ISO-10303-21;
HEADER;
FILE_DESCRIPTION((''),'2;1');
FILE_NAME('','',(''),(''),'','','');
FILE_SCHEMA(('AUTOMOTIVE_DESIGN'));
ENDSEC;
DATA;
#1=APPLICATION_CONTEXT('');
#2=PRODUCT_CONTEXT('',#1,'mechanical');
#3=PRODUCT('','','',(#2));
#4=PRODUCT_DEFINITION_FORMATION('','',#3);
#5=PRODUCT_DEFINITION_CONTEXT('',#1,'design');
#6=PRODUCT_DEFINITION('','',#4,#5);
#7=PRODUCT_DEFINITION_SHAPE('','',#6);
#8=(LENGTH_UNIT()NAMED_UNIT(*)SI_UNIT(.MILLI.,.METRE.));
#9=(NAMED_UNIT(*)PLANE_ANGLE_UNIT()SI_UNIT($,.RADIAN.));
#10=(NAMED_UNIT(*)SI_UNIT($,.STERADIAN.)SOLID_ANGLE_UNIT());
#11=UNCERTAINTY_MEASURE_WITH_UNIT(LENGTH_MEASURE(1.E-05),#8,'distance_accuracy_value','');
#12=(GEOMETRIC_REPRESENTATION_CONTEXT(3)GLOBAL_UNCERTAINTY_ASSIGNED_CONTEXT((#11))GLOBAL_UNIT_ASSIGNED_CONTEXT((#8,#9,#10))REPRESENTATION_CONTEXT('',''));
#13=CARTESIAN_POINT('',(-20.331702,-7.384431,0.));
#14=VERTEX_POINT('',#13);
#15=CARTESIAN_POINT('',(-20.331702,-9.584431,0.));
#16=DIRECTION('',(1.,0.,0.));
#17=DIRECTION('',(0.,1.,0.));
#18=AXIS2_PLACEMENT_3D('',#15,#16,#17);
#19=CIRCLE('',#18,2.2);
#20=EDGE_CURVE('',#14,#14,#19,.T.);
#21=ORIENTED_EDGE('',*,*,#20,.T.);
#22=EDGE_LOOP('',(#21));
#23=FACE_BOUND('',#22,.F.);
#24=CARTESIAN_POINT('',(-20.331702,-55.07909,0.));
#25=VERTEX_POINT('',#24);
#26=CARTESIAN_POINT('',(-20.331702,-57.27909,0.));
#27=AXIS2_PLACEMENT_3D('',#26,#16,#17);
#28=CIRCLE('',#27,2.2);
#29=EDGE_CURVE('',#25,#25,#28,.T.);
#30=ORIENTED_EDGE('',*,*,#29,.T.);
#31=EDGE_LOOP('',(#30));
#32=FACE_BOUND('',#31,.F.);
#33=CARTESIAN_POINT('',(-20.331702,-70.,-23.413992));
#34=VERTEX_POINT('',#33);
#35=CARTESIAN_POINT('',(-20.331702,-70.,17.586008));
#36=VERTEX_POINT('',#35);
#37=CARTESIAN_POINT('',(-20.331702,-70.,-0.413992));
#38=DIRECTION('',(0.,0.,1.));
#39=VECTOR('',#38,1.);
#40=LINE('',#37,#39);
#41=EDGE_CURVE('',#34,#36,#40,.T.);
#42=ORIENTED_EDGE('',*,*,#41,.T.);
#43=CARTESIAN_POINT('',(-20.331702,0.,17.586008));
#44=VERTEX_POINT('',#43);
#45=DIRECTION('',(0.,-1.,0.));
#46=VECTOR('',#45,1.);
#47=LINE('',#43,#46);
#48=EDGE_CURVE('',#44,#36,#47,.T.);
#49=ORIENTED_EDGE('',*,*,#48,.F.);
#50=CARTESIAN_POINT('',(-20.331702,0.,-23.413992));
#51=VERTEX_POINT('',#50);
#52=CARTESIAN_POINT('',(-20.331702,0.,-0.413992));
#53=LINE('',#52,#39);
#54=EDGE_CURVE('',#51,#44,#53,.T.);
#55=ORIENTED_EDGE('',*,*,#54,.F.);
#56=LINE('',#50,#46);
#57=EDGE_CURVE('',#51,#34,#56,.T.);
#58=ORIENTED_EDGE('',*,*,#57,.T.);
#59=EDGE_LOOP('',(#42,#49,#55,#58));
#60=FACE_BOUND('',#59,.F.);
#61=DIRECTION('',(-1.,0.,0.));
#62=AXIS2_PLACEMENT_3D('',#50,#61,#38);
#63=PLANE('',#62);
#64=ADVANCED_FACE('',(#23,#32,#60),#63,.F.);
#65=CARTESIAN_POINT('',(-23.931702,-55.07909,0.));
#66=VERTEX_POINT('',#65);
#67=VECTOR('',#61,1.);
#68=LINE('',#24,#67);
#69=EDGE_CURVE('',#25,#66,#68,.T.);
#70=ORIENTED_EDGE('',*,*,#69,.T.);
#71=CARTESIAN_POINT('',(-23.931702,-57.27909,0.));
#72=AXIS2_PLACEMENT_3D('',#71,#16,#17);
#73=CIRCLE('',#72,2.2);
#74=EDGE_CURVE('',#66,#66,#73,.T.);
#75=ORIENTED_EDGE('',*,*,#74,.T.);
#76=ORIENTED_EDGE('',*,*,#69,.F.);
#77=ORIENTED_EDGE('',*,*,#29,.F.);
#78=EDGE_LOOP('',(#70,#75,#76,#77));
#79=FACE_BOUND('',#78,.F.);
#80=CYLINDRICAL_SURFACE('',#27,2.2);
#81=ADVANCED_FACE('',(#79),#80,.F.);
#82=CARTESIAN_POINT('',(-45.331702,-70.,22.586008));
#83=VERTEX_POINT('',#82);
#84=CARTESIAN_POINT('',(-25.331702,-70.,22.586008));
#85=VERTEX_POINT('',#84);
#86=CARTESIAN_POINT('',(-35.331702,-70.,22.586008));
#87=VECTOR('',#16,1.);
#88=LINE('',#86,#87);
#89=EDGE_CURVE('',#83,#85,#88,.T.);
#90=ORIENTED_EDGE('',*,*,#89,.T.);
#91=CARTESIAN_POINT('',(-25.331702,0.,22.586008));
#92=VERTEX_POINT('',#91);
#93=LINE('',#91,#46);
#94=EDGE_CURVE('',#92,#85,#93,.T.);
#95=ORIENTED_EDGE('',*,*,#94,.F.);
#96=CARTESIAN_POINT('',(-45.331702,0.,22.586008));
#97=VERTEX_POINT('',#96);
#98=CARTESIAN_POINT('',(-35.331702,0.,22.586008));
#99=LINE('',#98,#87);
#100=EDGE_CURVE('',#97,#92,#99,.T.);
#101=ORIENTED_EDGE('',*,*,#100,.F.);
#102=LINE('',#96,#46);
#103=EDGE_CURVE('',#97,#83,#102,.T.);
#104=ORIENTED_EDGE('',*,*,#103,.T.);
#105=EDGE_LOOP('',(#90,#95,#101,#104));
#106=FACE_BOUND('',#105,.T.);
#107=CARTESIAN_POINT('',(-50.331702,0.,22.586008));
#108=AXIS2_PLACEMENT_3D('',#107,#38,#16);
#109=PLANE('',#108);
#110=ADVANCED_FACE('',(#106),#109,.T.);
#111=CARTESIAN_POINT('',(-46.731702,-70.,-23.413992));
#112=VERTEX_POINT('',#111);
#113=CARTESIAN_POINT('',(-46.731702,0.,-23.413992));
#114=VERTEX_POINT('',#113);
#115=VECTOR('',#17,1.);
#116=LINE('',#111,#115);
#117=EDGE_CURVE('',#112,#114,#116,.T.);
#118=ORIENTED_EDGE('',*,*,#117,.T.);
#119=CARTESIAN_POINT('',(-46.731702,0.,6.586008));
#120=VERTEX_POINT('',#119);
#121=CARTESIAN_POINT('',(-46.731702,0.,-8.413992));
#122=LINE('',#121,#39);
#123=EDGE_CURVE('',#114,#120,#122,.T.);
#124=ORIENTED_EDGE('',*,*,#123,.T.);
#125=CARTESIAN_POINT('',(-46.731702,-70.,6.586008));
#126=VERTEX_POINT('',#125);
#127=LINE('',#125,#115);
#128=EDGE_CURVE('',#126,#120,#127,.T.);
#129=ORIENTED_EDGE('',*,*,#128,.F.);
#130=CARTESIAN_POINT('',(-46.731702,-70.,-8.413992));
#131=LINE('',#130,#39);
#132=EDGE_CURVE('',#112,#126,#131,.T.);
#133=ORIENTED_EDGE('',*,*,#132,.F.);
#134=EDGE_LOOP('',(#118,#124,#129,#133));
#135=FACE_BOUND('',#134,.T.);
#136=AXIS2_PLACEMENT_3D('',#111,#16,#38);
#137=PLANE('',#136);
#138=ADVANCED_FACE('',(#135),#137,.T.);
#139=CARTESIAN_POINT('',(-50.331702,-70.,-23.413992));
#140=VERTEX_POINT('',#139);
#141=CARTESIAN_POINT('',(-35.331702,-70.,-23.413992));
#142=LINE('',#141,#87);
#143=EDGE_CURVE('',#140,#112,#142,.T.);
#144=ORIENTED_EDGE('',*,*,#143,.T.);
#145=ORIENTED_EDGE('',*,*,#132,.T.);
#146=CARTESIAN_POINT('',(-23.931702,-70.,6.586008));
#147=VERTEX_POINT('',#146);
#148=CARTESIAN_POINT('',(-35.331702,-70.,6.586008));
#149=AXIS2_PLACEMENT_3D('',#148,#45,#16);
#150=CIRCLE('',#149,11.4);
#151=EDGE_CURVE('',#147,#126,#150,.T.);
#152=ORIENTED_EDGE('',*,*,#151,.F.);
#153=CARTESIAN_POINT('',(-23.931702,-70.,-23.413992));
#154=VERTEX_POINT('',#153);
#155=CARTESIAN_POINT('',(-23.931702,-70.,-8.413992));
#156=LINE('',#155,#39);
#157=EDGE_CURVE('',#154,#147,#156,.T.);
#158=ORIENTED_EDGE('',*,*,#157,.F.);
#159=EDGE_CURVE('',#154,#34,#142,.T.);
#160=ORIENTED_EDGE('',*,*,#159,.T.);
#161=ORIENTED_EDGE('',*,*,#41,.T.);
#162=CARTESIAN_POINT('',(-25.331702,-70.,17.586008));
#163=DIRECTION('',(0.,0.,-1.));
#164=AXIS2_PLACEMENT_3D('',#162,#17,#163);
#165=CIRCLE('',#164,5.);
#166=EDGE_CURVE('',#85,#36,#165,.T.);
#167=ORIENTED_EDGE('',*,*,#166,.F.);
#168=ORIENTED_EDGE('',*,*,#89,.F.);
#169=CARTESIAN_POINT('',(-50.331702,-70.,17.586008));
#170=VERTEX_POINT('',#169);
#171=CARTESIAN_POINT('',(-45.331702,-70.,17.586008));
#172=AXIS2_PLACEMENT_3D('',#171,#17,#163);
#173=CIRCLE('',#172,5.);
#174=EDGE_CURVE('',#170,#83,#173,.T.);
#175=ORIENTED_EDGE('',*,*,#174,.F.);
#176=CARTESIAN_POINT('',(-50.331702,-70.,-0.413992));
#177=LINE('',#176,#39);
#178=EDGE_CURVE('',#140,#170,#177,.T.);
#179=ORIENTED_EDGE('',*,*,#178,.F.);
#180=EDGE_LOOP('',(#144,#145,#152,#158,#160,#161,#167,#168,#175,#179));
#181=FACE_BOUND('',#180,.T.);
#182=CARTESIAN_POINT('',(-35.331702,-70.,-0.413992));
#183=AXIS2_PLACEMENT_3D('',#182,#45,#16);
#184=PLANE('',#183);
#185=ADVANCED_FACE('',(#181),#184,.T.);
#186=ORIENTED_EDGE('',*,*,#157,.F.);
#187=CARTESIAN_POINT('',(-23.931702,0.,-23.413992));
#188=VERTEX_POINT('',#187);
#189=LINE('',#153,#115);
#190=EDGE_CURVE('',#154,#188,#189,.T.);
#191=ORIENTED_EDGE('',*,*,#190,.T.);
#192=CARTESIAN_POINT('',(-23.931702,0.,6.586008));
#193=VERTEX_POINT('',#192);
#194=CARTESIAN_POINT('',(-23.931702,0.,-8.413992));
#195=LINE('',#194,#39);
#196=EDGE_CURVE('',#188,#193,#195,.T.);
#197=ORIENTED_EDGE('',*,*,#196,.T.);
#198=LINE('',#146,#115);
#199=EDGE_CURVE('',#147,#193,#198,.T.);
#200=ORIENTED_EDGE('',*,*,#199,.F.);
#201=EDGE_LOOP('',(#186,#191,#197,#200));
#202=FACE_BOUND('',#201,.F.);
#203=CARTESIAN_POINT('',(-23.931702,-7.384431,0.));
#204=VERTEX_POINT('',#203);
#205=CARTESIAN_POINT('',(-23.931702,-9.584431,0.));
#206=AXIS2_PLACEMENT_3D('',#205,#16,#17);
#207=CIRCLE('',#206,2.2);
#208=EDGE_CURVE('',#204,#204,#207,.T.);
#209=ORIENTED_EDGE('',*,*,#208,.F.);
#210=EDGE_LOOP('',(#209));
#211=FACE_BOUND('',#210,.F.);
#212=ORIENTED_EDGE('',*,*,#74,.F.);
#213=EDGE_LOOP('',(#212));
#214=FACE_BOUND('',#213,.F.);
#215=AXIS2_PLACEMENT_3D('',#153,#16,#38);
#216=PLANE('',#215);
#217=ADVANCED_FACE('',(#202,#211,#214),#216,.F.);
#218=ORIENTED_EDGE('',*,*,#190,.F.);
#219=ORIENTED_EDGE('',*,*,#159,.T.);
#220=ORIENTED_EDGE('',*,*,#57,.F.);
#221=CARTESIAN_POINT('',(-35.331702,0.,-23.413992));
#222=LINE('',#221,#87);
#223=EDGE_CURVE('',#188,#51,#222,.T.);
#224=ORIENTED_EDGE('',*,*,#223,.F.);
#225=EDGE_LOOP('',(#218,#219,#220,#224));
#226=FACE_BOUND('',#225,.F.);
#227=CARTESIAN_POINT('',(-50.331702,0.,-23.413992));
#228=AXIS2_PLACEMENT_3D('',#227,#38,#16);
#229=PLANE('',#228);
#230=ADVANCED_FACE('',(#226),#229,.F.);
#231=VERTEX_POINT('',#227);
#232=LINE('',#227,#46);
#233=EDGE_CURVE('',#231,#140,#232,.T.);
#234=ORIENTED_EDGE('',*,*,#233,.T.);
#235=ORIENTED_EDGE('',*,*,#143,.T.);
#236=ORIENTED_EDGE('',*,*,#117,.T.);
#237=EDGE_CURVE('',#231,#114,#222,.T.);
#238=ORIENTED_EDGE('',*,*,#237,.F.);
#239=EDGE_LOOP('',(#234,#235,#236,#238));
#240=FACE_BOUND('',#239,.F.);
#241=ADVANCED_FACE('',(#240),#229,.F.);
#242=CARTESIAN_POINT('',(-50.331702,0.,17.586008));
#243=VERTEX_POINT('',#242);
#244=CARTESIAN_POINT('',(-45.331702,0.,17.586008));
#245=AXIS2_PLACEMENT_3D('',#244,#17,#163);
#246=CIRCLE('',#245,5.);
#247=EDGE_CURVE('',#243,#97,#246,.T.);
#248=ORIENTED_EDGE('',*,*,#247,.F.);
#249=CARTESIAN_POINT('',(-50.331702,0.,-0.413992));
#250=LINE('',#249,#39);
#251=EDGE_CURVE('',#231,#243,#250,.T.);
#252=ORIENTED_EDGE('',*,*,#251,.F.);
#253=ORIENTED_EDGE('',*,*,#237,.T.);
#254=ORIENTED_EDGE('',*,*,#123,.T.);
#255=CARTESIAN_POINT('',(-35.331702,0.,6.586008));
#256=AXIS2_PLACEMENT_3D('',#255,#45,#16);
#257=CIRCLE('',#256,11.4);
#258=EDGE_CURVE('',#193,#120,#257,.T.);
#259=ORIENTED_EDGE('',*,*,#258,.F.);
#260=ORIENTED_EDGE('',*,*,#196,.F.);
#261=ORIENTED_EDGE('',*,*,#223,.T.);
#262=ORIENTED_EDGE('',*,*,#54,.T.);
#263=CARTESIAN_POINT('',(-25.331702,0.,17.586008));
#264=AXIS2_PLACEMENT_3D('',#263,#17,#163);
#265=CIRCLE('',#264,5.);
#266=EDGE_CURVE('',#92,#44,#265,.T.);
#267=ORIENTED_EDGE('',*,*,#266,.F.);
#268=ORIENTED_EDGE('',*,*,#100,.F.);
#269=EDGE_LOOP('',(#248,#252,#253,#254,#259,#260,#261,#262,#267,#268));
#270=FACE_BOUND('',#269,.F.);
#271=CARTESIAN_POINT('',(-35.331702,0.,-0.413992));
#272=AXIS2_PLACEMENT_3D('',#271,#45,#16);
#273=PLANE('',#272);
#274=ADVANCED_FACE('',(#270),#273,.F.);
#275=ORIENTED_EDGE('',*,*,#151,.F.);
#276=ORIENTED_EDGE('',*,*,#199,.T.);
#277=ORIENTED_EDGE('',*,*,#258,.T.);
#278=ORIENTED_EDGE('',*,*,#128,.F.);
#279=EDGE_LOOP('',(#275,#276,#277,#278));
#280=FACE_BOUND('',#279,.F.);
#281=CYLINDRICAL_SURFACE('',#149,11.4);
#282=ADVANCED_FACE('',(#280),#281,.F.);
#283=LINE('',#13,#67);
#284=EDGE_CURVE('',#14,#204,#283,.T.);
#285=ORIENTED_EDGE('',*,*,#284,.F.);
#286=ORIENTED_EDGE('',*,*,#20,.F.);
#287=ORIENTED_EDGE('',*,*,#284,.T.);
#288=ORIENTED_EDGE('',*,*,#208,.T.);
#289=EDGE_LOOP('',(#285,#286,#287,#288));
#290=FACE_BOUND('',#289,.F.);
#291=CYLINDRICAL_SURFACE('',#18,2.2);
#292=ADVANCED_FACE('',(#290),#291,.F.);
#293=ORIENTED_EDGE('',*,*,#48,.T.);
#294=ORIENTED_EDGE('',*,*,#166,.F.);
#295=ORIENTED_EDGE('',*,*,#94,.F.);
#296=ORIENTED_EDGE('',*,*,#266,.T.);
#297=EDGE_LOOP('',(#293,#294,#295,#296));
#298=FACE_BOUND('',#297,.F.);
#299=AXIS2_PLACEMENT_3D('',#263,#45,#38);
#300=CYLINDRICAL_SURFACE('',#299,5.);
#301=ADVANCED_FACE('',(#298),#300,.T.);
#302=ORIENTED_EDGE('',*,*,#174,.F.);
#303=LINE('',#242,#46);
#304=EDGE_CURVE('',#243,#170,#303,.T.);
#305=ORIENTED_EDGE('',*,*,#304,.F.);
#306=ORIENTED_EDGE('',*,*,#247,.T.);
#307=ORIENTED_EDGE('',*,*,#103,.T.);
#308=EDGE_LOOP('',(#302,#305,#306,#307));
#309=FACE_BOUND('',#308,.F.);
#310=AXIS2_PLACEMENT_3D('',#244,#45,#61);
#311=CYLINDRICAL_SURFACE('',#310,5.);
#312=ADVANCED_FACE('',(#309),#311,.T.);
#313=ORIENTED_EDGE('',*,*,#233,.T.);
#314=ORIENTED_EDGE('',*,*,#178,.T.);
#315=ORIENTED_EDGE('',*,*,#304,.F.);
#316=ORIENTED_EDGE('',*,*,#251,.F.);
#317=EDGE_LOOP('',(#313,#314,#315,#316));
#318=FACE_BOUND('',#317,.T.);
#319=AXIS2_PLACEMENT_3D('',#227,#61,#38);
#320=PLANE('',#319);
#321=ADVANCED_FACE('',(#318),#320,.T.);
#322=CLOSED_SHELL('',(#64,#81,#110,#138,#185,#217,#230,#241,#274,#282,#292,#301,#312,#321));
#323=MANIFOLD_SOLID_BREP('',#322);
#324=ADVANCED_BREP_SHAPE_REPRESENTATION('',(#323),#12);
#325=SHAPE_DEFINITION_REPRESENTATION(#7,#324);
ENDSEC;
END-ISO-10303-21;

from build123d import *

# Parameters (mm, degrees)
F0_W     = 30
F0_H     = 46
F1_DEPTH = 70
F2_W     = 22.8
F2_H     = 30
F3_DEPTH = 70
F4_R     = 2.2
F5_DEPTH = 3.6
F6_R     = 5


# Not quite as in the source:
# - a feature names something its author has since deleted; it is built from what else it names


with BuildPart() as f1:
    # F0 (on Front) → F1 (new body)
    with BuildSketch(Plane.XZ):
        with Locations((-35.3317022547, -0.4139923602)):
            Rectangle(F0_W, F0_H)
    extrude(amount=F1_DEPTH)

    # F2 (on face) → F3 (cut, through all)
    with BuildSketch(Plane.XZ.offset(70)):
        with Locations((-35.3317022547, -8.4139923602)):
            Rectangle(F2_W, F2_H)
        with BuildLine():
            ThreePointArc((-23.9317022547, 6.5860076398), (-35.3317022547, 17.9860076398), (-46.7317022547, 6.5860076398))
            Line((-46.7317022547, 6.5860076398), (-23.9317022547, 6.5860076398))
        make_face()
    extrude(amount=-F3_DEPTH, mode=Mode.SUBTRACT)

    # F4 (on face) → F5 (cut, through all)
    with BuildSketch(Plane.YZ.offset(-20.3317022547)):
        with Locations((-9.5844314775, 0)):
            Circle(F4_R)
        with Locations((-57.2790902557, 0)):
            Circle(F4_R)
    extrude(amount=-F5_DEPTH, mode=Mode.SUBTRACT)

    # F6
    f6_edges = [f1.edges().sort_by_distance(p)[0] for p in [
        (-20.331702, -35, 22.586008),
        (-50.331702, -35, 22.586008),
    ]]
    fillet(f6_edges, radius=F6_R)


solid = f1.part
